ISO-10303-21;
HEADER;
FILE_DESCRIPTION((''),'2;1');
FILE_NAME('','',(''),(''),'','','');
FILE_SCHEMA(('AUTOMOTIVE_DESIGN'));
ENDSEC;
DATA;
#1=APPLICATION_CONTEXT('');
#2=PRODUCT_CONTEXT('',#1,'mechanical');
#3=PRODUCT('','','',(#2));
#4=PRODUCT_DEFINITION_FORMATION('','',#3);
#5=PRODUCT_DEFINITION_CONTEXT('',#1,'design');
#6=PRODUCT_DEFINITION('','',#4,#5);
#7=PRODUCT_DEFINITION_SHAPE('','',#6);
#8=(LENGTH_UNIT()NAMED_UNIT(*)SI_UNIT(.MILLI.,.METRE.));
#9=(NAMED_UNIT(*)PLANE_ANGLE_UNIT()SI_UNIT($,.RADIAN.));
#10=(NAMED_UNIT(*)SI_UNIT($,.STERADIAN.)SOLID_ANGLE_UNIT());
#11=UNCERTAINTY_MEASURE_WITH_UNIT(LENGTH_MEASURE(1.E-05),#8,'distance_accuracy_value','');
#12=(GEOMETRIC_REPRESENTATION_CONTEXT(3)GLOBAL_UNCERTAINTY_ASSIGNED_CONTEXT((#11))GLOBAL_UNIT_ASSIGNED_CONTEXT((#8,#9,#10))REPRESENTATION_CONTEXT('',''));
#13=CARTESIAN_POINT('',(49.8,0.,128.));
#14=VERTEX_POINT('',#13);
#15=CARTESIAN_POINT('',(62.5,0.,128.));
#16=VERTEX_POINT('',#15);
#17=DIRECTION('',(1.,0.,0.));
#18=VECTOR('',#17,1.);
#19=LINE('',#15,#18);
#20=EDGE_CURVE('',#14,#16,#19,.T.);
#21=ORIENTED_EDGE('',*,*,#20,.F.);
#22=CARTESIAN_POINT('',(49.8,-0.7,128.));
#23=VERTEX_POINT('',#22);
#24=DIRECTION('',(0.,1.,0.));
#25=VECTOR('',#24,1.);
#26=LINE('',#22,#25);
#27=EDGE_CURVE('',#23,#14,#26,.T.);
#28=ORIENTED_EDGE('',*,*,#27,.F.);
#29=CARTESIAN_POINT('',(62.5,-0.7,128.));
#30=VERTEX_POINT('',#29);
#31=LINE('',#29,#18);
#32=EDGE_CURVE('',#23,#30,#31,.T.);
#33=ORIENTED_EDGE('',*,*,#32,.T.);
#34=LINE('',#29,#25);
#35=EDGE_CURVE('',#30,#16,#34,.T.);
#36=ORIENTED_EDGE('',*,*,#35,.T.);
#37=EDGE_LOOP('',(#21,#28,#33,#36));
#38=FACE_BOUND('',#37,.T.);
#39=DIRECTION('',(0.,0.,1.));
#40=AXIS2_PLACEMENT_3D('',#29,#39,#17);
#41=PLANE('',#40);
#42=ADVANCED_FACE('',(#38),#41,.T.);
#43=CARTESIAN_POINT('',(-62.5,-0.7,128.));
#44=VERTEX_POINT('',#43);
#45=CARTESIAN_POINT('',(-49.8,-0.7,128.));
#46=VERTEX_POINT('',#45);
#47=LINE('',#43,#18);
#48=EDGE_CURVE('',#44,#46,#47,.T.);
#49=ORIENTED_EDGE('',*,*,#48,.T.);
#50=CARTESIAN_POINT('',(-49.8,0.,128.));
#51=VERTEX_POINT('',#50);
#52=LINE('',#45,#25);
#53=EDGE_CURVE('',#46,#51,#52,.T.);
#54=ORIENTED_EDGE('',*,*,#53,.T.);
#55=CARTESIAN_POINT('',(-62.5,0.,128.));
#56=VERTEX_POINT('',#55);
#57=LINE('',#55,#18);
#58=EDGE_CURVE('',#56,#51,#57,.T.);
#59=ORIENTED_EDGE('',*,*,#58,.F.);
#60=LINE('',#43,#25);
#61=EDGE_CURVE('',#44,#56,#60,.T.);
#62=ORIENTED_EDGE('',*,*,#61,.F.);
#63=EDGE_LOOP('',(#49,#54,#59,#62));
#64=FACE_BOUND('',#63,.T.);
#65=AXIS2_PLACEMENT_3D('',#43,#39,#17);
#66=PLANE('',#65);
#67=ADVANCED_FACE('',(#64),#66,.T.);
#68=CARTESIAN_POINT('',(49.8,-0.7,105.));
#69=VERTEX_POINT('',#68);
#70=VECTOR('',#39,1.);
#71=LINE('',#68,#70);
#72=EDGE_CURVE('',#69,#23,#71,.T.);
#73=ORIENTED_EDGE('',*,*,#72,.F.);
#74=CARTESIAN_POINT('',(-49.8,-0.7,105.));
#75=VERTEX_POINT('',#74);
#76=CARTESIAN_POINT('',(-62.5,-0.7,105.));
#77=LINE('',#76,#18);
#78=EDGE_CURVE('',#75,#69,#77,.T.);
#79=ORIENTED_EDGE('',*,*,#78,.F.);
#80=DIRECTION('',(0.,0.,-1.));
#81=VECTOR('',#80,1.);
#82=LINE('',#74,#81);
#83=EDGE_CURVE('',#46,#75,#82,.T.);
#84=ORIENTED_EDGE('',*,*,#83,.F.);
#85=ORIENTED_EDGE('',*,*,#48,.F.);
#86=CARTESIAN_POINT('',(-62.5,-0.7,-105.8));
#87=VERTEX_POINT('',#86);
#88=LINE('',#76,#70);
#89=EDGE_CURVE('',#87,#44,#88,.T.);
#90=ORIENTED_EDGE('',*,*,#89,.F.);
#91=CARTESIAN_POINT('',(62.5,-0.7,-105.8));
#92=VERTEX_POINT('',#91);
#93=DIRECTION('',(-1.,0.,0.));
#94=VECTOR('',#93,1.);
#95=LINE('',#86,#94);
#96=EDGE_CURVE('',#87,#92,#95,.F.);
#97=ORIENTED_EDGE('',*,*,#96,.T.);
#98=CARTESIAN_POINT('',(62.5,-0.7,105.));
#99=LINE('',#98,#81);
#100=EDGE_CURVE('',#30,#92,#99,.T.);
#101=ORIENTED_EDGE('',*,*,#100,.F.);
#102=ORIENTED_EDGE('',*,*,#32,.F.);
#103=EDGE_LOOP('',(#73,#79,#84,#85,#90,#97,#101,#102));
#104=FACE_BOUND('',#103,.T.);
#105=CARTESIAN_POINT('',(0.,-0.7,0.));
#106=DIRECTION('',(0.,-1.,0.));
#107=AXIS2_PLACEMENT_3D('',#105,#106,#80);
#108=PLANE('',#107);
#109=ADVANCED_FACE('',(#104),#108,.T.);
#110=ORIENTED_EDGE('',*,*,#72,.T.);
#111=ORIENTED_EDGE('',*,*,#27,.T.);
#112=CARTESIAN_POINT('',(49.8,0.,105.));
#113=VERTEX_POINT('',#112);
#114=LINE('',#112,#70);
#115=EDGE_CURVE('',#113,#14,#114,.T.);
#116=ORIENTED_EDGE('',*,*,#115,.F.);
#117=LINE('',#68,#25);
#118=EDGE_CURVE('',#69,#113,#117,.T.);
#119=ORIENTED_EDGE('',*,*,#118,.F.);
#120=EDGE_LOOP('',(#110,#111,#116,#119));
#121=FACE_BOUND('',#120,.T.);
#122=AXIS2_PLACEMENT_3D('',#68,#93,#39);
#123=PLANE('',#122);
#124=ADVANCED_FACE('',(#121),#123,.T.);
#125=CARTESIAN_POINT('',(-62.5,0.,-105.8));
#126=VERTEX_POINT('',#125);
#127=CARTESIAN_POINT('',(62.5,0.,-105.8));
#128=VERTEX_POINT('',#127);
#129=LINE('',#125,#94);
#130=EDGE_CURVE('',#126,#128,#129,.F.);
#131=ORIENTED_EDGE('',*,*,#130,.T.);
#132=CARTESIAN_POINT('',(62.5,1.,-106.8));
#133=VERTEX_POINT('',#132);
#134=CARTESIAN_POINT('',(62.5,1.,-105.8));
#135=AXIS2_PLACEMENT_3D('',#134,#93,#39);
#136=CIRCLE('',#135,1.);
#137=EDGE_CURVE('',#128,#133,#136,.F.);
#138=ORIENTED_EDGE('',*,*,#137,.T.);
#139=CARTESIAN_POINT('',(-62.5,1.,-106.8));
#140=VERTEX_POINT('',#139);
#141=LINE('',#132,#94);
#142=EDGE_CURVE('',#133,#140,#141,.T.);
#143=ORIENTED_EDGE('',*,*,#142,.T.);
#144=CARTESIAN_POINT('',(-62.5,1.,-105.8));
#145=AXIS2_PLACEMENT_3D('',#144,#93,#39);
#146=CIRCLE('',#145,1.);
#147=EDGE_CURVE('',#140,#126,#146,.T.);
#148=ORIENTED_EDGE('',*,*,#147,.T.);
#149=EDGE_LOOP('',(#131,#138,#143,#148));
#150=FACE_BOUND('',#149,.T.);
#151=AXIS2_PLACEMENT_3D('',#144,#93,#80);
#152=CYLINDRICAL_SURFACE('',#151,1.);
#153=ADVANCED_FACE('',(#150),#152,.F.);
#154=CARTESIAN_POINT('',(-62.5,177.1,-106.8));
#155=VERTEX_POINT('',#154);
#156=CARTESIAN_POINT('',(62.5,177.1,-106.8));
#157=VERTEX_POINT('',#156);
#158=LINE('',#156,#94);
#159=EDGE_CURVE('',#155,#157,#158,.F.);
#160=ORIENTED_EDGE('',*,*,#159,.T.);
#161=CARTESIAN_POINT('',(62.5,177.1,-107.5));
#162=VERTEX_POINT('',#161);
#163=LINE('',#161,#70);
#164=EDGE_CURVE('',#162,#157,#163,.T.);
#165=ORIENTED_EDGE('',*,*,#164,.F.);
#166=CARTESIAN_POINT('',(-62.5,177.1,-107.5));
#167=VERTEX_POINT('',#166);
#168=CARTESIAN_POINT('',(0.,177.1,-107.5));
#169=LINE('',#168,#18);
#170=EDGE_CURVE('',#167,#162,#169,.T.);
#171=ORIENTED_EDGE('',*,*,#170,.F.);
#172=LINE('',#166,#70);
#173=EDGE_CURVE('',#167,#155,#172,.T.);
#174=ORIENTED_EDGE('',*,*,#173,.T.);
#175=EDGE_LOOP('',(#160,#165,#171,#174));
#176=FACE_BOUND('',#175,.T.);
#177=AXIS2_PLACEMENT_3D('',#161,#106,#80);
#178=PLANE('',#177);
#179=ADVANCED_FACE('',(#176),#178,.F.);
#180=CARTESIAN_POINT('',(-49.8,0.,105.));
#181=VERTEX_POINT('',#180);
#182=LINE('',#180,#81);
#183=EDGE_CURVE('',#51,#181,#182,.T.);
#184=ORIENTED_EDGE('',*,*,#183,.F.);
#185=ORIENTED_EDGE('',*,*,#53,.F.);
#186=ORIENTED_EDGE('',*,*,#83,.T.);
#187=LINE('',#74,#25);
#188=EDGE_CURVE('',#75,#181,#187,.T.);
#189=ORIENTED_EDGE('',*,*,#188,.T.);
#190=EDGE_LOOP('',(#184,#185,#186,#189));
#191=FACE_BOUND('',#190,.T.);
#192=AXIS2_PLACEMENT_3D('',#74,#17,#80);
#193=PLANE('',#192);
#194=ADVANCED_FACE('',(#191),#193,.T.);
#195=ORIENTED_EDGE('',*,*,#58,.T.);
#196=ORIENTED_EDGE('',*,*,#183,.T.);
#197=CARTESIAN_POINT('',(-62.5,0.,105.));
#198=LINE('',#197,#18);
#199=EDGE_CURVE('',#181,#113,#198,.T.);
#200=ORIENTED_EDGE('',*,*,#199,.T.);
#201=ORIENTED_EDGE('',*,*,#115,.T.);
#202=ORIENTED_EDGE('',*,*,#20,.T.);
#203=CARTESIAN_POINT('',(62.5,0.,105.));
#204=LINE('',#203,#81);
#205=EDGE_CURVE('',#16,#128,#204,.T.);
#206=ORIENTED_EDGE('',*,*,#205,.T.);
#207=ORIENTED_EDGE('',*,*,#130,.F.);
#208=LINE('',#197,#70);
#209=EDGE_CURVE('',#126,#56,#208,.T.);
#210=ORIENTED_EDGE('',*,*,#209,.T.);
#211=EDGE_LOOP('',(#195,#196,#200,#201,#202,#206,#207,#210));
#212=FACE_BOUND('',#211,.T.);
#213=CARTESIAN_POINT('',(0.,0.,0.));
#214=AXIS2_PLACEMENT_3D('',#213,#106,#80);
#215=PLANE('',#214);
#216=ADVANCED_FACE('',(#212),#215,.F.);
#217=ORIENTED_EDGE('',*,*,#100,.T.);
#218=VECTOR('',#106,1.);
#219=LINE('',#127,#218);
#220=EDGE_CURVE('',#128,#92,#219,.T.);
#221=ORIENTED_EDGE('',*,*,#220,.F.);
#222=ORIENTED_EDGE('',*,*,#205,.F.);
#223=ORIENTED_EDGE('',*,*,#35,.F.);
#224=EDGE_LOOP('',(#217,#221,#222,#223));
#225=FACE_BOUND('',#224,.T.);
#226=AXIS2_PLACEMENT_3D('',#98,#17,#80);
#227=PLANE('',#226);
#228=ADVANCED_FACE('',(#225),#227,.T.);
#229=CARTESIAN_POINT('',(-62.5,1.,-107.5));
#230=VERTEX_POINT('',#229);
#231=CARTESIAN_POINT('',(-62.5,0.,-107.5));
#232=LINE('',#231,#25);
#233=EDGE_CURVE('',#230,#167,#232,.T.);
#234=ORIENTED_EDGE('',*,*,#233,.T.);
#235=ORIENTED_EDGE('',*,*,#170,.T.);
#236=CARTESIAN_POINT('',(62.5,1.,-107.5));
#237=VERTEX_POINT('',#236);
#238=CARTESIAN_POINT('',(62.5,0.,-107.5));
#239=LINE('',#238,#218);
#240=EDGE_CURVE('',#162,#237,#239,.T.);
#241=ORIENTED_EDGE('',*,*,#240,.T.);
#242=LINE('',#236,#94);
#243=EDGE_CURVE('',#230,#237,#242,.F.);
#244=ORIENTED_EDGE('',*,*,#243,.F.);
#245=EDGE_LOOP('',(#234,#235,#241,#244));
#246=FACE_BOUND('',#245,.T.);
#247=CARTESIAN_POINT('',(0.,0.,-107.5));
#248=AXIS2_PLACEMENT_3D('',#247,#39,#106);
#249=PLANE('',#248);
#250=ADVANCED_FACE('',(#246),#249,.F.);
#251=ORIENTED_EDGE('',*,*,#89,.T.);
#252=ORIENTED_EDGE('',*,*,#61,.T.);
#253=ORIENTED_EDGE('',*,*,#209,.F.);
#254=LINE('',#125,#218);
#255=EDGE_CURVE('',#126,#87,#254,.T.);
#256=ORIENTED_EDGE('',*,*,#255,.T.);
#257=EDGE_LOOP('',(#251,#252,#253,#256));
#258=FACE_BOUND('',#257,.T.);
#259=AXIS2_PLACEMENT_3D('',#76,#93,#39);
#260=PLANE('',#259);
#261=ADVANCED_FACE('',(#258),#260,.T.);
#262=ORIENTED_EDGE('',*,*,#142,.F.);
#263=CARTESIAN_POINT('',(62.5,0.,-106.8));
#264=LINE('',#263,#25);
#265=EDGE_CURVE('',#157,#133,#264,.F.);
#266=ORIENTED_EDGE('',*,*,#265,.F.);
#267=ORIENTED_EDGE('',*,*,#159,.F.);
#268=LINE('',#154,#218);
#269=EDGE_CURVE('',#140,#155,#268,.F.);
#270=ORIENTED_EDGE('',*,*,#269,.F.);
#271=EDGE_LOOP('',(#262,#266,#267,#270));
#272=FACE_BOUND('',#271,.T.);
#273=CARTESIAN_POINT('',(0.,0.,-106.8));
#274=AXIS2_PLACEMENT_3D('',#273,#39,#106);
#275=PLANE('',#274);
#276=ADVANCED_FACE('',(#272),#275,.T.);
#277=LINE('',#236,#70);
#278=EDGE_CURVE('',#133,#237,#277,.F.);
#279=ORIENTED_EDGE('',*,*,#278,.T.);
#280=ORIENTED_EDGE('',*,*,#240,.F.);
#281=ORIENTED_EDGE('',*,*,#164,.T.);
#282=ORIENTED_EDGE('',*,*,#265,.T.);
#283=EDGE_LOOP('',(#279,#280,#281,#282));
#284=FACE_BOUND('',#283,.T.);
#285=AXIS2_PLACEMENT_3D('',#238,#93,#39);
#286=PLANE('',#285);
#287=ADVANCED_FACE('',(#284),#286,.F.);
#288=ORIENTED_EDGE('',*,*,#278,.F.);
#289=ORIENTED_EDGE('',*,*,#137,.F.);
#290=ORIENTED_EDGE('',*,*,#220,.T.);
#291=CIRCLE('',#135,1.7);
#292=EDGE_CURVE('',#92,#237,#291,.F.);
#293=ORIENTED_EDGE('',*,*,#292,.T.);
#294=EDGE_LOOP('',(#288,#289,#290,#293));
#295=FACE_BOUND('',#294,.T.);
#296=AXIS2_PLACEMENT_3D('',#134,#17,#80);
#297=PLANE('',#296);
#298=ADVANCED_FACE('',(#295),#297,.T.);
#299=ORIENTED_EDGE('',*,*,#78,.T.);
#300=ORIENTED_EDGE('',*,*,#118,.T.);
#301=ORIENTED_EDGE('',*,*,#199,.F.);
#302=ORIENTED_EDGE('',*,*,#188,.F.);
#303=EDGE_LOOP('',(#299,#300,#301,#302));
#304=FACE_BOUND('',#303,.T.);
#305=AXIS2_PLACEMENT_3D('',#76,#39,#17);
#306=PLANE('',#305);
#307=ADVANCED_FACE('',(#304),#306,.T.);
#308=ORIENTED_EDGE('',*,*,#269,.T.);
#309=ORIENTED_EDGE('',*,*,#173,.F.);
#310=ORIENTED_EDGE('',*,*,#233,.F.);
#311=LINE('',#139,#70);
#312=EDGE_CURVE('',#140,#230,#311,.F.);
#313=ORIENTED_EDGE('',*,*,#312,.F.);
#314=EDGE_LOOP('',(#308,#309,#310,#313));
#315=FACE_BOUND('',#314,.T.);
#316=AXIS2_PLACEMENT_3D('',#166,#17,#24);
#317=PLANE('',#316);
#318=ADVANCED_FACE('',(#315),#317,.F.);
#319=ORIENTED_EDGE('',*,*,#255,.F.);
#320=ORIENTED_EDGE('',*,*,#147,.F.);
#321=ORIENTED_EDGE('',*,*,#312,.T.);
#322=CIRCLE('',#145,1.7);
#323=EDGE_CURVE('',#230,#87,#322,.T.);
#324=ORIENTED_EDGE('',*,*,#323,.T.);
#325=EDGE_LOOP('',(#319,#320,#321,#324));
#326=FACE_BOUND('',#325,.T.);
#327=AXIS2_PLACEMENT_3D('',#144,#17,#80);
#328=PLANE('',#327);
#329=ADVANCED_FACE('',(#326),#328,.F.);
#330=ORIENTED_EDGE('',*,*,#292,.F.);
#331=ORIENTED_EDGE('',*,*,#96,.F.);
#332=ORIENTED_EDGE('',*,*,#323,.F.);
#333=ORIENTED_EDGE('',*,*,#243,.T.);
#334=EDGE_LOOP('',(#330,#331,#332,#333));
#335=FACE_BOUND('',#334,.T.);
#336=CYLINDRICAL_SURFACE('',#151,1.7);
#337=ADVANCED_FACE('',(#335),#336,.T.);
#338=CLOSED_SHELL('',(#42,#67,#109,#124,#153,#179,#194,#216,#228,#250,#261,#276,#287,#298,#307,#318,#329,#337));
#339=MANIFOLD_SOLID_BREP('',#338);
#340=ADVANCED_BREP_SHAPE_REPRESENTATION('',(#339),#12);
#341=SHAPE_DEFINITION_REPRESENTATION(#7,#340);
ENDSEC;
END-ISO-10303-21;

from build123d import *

# Parameters (mm, degrees)
SKETCH1_W          = 125
SKETCH1_H          = 210
BASE_FLANGE1_DEPTH = 0.7
EDGE_FLANGE1_DEPTH = 125
SKETCH9_W          = 12.7
SKETCH9_H          = 23
TAB1_DEPTH         = 0.7
SKETCH12_W         = 12.7
SKETCH12_H         = 23
TAB2_DEPTH         = 0.7


# Sheet-metal steps are written as plain solids
with BuildPart() as part:
    # Sketch1 → Base-Flange1 (new body)
    with BuildSketch(Plane(origin=(0, 0, 0), x_dir=(1, 0, 0), z_dir=(0, 1, 0))):
        Rectangle(SKETCH1_W, SKETCH1_H)
    extrude(amount=-BASE_FLANGE1_DEPTH)

    # Edge-Flange1 section (across the edge) → Edge-Flange1 (add)
    with BuildSketch(Plane(origin=(62.5, 0, -106.8), x_dir=(0, 0, 1), z_dir=(-1, 0, 0))):
        with BuildLine():
            Line((-0.7, 1), (-0.7, 177.1))
            Line((-0.7, 177.1), (0, 177.1))
            Line((0, 177.1), (0, 1))
            ThreePointArc((0, 1), (0.292893219, 0.292893219), (1, 0))
            Line((1, 0), (1.8, 0))
            Line((1.8, 0), (1.8, -0.7))
            Line((1.8, -0.7), (1, -0.7))
            ThreePointArc((1, -0.7), (-0.202081528, -0.202081528), (-0.7, 1))
        make_face()
    extrude(amount=EDGE_FLANGE1_DEPTH)

    # Sketch9 → Tab1 (add)
    with BuildSketch(Plane(origin=(0, 0, 0), x_dir=(1, 0, 0), z_dir=(0, 1, 0))):
        with Locations((-56.15, -116.5)):
            Rectangle(SKETCH9_W, SKETCH9_H)
    extrude(amount=-TAB1_DEPTH)

    # Sketch12 → Tab2 (add)
    with BuildSketch(Plane(origin=(0, 0, 0), x_dir=(1, 0, 0), z_dir=(0, 1, 0))):
        with Locations((56.15, -116.5)):
            Rectangle(SKETCH12_W, SKETCH12_H)
    extrude(amount=-TAB2_DEPTH)


solid = part.part
